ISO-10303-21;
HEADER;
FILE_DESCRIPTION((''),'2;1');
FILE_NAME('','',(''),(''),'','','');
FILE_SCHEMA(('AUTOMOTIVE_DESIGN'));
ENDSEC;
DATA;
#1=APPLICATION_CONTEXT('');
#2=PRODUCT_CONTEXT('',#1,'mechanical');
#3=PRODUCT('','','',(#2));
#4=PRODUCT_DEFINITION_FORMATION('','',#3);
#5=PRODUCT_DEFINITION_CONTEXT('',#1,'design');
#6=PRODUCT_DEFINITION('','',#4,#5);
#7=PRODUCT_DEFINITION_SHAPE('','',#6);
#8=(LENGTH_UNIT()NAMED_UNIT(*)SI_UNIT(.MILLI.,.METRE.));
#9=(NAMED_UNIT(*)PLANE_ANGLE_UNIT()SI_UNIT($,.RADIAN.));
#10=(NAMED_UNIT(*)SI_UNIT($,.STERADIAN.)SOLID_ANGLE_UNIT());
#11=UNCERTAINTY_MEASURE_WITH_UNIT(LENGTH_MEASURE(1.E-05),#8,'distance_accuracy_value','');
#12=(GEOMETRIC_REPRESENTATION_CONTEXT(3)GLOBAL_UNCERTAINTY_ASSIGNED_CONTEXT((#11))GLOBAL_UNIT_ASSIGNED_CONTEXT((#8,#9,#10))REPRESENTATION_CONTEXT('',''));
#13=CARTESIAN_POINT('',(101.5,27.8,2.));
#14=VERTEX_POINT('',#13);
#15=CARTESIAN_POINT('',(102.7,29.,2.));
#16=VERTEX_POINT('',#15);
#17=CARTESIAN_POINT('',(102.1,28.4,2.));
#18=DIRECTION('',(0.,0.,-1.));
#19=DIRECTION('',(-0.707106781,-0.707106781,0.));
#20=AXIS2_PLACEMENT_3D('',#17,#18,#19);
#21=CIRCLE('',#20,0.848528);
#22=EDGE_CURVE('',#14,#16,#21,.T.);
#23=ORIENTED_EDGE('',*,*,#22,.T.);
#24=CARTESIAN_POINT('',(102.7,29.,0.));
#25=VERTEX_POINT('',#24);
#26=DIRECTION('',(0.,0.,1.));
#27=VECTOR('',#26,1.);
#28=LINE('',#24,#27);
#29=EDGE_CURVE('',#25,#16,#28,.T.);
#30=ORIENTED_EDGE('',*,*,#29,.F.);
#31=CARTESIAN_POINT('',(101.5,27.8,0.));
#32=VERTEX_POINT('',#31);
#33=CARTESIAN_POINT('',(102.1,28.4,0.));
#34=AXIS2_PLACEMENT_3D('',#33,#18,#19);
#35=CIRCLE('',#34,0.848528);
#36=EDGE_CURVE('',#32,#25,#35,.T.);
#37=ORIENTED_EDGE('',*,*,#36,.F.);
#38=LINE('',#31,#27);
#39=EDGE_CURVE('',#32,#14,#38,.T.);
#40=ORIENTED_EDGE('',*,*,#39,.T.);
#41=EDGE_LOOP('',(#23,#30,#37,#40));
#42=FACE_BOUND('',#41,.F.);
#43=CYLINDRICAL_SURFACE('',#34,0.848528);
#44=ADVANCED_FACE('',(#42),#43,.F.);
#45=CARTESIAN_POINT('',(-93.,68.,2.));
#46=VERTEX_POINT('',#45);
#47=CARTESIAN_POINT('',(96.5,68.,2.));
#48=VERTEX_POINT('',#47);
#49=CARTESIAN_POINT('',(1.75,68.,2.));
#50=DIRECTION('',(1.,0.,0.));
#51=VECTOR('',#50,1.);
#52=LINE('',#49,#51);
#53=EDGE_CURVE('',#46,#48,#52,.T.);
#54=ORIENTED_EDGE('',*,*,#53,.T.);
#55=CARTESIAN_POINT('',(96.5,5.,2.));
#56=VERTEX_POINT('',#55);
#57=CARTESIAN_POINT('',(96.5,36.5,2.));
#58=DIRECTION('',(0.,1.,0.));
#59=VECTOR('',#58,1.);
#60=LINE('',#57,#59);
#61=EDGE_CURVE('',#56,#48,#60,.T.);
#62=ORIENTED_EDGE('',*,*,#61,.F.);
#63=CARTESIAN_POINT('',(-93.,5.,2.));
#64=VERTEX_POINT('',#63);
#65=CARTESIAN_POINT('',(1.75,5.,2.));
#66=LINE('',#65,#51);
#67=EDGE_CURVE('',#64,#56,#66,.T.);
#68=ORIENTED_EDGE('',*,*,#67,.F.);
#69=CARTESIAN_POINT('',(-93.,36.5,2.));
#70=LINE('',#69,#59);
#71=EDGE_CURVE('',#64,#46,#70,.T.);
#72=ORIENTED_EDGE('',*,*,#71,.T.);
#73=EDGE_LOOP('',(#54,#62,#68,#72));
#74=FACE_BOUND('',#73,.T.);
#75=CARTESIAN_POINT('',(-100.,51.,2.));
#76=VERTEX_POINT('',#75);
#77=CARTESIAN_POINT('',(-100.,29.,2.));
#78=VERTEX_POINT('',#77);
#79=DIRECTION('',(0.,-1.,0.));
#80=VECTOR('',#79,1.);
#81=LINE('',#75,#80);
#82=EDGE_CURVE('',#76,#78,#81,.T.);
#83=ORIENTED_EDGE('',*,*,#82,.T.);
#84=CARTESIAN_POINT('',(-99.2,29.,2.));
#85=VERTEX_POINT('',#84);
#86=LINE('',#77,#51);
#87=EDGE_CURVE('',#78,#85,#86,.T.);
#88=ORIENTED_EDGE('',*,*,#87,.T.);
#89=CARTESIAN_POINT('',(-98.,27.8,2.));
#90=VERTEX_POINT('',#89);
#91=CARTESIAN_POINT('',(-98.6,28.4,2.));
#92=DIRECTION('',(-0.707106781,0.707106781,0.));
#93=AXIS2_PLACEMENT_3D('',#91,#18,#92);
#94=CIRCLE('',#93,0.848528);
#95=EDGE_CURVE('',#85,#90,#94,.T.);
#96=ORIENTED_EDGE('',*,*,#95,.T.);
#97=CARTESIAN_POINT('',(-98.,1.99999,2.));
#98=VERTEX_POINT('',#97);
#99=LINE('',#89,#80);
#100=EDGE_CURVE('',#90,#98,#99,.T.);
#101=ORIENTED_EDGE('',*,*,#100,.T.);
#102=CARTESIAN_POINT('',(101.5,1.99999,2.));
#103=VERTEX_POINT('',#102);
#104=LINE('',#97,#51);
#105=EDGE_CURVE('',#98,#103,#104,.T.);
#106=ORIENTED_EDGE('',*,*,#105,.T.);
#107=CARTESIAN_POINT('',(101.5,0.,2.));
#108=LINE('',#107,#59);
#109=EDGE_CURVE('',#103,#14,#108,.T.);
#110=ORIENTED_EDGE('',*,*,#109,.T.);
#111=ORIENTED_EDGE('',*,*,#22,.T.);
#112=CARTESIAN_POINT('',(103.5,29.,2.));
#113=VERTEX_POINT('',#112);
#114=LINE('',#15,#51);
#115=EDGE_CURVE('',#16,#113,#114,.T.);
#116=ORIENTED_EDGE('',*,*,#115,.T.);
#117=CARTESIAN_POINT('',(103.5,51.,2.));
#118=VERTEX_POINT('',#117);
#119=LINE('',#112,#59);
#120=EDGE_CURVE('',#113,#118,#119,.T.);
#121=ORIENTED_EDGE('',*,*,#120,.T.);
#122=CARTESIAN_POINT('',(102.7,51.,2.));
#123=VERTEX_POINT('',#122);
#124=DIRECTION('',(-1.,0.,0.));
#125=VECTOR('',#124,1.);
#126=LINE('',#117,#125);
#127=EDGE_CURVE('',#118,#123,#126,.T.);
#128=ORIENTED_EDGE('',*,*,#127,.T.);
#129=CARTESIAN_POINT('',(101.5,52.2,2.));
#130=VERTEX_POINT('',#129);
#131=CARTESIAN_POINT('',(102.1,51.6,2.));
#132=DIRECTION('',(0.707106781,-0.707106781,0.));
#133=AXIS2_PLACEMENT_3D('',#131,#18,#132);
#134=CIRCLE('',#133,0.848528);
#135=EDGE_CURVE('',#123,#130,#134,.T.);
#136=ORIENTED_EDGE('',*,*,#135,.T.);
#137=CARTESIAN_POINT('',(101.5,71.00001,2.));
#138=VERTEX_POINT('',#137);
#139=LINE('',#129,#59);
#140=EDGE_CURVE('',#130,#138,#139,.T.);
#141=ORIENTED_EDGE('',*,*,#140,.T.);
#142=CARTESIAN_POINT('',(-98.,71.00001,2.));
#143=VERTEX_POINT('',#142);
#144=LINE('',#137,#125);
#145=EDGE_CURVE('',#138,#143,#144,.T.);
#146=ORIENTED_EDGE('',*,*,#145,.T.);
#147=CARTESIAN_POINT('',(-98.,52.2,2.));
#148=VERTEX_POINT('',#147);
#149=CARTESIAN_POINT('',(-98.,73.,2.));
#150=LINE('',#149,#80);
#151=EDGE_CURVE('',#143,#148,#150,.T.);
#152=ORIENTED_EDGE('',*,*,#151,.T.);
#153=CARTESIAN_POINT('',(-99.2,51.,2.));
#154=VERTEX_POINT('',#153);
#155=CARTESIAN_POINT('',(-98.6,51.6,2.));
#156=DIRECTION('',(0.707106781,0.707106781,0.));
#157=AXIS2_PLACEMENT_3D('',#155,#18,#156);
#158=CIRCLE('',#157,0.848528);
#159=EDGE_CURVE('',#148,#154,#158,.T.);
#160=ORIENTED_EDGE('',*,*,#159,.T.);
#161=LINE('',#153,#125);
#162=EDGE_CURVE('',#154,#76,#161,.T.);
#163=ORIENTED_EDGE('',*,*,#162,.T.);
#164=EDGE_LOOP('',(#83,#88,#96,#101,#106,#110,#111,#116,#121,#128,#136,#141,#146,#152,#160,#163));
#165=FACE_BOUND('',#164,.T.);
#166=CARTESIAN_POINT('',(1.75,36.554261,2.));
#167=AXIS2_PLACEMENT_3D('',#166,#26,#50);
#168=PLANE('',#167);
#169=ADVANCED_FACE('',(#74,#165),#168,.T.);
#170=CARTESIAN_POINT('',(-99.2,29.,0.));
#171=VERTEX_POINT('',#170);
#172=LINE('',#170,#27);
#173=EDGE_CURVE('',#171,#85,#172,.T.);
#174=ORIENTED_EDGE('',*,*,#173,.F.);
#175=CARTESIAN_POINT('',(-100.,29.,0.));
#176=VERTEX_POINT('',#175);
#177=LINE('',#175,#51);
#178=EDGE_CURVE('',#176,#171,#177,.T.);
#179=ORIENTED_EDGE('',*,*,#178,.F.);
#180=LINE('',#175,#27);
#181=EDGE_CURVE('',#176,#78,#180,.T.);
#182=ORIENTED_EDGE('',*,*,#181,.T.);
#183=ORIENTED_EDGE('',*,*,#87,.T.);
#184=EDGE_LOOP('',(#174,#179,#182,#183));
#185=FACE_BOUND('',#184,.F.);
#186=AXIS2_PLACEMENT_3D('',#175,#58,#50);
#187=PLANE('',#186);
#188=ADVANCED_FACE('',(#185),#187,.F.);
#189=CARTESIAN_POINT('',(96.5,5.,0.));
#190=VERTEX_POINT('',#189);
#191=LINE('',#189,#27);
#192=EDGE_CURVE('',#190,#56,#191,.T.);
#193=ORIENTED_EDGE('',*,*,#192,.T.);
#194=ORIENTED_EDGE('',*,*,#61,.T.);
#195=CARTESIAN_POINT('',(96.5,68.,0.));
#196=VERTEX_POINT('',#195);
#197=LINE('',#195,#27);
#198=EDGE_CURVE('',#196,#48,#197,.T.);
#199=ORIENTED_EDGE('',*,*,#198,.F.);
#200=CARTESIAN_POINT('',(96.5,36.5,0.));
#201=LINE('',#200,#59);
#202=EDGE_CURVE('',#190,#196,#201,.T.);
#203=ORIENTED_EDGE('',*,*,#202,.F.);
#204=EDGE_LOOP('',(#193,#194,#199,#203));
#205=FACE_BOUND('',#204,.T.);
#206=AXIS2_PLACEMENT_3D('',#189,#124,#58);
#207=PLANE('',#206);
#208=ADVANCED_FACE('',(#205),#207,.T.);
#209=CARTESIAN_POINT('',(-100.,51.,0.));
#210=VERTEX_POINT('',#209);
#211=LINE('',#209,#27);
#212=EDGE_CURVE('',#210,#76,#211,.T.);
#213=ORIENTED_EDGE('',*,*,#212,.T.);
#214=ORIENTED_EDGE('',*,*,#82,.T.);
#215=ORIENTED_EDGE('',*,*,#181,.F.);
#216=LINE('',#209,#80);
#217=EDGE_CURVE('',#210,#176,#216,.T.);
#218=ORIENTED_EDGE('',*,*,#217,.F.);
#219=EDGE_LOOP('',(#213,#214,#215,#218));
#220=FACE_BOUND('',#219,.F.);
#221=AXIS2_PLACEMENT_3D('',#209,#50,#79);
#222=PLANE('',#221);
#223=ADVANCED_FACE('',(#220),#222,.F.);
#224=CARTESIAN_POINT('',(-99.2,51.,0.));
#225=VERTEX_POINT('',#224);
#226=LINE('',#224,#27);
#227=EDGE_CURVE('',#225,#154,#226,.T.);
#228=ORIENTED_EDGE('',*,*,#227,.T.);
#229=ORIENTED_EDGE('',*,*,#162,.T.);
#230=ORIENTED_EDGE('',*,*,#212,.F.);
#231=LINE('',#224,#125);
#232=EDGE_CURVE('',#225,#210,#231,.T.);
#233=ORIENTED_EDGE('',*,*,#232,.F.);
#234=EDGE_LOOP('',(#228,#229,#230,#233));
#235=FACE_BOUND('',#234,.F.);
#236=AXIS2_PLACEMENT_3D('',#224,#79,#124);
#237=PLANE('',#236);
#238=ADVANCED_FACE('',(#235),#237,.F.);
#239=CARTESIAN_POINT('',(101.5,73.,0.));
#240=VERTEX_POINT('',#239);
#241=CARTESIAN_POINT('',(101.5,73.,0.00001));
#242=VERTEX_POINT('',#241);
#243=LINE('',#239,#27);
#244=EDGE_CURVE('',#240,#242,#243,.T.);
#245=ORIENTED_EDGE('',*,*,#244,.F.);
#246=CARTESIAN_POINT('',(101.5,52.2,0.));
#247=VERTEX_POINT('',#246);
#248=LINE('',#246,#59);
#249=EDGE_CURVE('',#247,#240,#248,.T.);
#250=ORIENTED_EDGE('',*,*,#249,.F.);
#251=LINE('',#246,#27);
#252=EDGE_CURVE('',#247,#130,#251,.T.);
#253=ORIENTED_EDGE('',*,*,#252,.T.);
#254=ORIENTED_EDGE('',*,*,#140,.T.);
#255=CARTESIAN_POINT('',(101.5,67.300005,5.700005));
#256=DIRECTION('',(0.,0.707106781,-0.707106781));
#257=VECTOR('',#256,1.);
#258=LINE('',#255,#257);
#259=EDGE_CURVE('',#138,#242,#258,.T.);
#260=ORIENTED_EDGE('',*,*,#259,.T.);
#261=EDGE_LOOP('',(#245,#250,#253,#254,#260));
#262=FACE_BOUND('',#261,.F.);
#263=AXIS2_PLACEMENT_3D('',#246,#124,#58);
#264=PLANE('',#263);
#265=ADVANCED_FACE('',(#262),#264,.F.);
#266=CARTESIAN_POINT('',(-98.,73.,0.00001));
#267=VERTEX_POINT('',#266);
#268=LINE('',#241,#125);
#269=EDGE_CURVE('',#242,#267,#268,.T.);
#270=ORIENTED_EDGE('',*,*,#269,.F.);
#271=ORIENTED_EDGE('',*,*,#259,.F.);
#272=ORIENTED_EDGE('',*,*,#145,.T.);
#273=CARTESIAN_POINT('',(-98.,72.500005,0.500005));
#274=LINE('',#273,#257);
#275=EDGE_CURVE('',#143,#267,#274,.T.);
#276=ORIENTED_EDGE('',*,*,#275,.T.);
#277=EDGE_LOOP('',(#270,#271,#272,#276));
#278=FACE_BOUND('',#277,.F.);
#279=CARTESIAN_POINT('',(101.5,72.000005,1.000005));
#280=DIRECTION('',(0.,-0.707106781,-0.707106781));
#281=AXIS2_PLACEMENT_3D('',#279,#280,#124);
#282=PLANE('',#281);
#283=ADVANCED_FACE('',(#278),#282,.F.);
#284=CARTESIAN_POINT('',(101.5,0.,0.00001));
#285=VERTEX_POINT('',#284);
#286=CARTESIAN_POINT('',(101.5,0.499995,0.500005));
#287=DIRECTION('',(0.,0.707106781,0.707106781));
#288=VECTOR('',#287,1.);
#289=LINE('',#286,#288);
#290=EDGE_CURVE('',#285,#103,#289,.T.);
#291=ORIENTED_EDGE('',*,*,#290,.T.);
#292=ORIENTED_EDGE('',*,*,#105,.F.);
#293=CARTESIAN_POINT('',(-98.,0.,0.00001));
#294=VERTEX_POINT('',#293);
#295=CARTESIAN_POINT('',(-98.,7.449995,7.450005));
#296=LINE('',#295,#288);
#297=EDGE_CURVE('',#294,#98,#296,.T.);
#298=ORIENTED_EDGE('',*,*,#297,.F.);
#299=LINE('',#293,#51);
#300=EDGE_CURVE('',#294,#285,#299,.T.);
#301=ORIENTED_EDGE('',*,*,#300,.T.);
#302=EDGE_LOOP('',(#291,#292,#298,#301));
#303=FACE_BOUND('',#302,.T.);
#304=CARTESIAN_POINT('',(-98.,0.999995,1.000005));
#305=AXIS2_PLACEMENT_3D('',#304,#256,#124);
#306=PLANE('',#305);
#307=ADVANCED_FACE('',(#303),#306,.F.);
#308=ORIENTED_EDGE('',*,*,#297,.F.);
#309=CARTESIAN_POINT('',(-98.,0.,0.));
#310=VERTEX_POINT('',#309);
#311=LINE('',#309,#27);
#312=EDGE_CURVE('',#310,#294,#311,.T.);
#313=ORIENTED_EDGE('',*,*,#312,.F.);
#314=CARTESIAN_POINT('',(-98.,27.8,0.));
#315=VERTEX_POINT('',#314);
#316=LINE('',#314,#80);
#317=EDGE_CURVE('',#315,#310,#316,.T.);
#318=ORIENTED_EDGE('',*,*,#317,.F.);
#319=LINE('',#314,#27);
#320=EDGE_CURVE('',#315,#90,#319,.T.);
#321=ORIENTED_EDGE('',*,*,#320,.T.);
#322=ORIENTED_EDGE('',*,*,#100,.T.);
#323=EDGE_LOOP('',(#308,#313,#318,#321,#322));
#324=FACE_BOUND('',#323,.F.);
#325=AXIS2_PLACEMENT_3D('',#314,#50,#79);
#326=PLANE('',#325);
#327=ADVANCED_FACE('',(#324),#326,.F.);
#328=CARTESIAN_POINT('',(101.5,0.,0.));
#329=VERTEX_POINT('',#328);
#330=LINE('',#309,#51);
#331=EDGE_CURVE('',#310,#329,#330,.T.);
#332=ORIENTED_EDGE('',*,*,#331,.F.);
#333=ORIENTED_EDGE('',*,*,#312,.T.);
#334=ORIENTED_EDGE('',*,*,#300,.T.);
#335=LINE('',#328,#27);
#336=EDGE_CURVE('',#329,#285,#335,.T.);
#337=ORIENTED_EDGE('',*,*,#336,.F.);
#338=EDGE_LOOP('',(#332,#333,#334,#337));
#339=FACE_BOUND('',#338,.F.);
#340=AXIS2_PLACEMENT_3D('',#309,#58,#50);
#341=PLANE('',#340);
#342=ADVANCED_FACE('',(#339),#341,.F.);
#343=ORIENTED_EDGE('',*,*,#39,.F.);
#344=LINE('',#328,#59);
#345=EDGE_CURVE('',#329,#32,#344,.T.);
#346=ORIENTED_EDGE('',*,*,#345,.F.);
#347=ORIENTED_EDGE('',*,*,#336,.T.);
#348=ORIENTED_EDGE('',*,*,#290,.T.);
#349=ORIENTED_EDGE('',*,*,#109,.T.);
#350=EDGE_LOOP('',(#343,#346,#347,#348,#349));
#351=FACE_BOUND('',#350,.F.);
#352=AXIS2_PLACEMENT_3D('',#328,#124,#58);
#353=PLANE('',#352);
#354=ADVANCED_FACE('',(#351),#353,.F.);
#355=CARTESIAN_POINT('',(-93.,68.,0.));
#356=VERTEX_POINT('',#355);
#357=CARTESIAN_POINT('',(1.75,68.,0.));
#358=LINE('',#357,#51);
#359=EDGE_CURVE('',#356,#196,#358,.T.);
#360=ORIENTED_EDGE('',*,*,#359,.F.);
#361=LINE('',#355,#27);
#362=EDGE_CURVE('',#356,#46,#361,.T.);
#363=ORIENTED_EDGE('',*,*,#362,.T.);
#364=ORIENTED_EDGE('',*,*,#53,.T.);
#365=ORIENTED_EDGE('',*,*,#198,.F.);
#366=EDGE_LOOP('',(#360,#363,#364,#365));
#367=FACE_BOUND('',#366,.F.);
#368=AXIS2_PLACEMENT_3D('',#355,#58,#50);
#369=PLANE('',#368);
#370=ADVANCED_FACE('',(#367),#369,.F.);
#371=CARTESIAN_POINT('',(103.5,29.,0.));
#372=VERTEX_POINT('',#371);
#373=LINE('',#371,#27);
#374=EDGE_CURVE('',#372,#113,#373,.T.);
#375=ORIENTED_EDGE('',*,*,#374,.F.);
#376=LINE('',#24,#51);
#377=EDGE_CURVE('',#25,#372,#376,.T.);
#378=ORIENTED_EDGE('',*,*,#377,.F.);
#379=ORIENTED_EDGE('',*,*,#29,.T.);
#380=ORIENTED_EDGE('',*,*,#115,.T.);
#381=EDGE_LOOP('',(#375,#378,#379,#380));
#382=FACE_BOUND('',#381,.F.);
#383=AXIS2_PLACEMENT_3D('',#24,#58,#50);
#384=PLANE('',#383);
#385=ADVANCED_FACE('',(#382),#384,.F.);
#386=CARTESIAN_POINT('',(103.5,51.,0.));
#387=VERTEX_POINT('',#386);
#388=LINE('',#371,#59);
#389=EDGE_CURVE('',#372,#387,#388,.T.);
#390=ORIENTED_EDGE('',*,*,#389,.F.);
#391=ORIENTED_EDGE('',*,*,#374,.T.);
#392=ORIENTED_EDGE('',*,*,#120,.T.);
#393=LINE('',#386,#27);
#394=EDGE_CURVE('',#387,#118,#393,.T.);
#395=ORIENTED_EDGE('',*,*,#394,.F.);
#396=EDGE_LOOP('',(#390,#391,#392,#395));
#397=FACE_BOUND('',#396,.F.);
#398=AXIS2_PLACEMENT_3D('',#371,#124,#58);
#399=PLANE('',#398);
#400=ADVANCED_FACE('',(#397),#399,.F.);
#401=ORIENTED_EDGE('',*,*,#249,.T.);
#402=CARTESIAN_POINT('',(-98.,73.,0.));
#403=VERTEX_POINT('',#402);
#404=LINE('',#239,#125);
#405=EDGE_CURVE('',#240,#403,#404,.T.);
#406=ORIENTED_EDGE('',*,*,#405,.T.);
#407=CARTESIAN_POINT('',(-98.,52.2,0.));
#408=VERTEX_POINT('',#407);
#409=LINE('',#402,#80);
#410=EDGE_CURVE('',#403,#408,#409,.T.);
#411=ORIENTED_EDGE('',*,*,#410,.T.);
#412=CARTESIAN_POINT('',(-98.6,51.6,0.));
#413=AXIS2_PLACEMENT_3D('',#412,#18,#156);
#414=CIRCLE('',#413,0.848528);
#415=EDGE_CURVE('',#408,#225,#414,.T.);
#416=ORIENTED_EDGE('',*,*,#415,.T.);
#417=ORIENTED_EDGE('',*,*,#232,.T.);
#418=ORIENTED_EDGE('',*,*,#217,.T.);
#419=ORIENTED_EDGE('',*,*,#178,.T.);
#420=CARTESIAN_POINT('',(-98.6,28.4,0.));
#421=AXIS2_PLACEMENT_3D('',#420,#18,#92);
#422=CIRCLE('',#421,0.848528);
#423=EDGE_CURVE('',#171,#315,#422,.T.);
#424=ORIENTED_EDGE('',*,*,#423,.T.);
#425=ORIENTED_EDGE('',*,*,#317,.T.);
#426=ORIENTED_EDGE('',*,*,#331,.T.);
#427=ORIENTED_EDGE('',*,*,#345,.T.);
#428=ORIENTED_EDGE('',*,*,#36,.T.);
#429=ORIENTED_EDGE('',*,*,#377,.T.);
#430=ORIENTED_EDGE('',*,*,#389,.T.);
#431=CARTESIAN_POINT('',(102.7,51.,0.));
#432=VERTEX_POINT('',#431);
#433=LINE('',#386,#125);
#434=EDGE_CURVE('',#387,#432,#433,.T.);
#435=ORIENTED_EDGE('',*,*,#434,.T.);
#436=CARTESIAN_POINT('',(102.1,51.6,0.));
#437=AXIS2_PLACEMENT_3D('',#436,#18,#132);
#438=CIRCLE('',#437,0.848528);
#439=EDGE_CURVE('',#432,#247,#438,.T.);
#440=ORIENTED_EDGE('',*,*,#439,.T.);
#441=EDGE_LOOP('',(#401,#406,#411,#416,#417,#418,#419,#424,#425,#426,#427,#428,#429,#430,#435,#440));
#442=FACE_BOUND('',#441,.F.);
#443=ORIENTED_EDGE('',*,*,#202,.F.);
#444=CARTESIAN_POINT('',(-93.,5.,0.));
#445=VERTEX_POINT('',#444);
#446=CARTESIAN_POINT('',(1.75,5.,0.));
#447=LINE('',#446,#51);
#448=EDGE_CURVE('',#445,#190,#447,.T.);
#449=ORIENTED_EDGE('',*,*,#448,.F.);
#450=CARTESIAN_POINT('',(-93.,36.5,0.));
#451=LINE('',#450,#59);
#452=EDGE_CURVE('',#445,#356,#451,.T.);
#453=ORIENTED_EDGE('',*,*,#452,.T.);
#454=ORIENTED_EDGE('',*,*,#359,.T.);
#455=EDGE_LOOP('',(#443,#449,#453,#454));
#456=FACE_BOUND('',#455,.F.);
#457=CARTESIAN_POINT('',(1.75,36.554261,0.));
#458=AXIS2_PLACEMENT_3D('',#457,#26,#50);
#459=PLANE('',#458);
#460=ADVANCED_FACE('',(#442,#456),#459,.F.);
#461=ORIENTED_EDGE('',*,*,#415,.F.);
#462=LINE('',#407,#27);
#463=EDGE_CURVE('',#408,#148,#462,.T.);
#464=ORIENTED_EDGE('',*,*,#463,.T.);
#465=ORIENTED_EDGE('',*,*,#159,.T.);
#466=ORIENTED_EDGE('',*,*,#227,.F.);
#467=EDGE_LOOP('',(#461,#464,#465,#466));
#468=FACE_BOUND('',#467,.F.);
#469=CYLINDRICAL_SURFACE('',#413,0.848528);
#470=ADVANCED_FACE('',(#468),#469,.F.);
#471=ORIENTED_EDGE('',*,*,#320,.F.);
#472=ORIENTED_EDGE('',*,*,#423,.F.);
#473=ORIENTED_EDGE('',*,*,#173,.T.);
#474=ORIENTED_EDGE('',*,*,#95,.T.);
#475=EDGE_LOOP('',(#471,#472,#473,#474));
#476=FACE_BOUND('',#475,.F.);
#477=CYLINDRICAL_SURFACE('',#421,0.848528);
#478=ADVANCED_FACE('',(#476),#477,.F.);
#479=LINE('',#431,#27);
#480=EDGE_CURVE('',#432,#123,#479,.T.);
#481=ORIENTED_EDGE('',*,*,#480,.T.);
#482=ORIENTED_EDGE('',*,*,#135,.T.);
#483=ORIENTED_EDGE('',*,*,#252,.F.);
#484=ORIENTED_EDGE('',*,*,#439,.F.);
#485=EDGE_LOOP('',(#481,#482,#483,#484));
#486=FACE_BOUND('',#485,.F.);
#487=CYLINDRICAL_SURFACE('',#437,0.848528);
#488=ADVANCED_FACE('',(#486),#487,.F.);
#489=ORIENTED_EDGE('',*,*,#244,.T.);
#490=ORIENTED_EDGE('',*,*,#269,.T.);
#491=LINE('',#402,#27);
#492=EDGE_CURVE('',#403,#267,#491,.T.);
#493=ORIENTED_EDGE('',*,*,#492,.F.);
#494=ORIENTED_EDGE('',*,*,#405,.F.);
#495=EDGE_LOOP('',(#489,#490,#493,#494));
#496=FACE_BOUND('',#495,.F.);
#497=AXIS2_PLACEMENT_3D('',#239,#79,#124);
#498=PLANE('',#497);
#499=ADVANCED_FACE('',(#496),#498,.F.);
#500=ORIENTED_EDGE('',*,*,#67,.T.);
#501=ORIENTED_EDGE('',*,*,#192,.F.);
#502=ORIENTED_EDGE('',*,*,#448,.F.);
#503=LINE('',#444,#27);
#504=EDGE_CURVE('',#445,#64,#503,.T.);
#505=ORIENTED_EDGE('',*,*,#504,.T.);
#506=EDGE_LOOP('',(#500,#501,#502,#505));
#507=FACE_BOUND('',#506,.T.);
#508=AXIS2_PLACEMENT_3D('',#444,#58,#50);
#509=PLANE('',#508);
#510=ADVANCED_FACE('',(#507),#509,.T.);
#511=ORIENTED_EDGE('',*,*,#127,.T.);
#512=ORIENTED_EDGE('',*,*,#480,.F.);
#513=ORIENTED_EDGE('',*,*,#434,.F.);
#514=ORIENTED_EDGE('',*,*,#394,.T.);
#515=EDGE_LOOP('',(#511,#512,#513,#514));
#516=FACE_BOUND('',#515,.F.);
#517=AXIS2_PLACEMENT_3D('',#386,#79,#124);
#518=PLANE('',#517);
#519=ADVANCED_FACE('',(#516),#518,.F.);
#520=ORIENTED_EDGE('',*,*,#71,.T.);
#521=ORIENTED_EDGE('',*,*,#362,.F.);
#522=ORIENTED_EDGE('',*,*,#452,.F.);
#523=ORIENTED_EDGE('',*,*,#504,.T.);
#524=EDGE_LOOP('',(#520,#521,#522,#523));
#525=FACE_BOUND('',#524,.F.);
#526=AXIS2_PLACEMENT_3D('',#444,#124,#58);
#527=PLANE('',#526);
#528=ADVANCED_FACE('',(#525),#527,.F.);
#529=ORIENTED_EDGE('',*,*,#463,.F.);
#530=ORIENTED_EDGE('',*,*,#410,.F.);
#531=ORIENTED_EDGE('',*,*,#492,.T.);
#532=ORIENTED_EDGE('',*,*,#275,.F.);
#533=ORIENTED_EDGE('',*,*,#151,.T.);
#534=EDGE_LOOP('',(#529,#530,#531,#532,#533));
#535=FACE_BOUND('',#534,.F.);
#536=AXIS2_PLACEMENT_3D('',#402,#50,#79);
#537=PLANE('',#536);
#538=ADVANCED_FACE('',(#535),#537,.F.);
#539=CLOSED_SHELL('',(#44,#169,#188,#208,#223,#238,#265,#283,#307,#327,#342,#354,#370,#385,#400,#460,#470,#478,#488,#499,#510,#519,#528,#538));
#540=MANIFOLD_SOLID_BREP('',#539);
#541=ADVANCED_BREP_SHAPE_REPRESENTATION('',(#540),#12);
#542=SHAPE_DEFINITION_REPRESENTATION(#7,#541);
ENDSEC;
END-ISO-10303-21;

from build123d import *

# Parameters (mm, degrees)
F0_W     = 189.5
F0_H     = 63
F1_DEPTH = 2
F2_SIZE  = 1.99999
F3_SIZE  = 1.99999


# Not quite as in the source:
# - a fillet or chamfer is up to 0.001 mm smaller than in the source, because OpenCascade refuses the exact size


with BuildPart() as f1:
    # F0 (on Top) → F1 (new body)
    with BuildSketch(Plane.XY):
        with BuildLine():
            Line((-99.2, 51), (-100, 51))
            Line((-100, 51), (-100, 29))
            Line((-100, 29), (-99.2, 29))
            ThreePointArc((-99.2, 29), (-98, 29), (-98, 27.8))
            Line((-98, 27.8), (-98, 0))
            Line((-98, 0), (101.5, 0))
            Line((101.5, 0), (101.5, 27.8))
            ThreePointArc((101.5, 27.8), (101.5, 29), (102.7, 29))
            Line((102.7, 29), (103.5, 29))
            Line((103.5, 29), (103.5, 51))
            Line((103.5, 51), (102.7, 51))
            ThreePointArc((102.7, 51), (101.5, 51), (101.5, 52.2))
            Line((101.5, 52.2), (101.5, 73))
            Line((101.5, 73), (-98, 73))
            Line((-98, 73), (-98, 52.2))
            ThreePointArc((-98, 52.2), (-98, 51), (-99.2, 51))
        make_face()
        with Locations((1.75, 36.5)):
            Rectangle(F0_W, F0_H, mode=Mode.SUBTRACT)
    extrude(amount=F1_DEPTH)

    # F2 (size 2 in the source; OpenCascade refuses exactly that, so slightly less here)
    f2_edges = [f1.edges().sort_by_distance(p)[0] for p in [
        (1.75, 0, 2),
    ]]
    chamfer(f2_edges, length=F2_SIZE)

    # F3 (size 2 in the source; OpenCascade refuses exactly that, so slightly less here)
    f3_edges = [f1.edges().sort_by_distance(p)[0] for p in [
        (1.75, 73, 2),
    ]]
    chamfer(f3_edges, length=F3_SIZE)


solid = f1.part
